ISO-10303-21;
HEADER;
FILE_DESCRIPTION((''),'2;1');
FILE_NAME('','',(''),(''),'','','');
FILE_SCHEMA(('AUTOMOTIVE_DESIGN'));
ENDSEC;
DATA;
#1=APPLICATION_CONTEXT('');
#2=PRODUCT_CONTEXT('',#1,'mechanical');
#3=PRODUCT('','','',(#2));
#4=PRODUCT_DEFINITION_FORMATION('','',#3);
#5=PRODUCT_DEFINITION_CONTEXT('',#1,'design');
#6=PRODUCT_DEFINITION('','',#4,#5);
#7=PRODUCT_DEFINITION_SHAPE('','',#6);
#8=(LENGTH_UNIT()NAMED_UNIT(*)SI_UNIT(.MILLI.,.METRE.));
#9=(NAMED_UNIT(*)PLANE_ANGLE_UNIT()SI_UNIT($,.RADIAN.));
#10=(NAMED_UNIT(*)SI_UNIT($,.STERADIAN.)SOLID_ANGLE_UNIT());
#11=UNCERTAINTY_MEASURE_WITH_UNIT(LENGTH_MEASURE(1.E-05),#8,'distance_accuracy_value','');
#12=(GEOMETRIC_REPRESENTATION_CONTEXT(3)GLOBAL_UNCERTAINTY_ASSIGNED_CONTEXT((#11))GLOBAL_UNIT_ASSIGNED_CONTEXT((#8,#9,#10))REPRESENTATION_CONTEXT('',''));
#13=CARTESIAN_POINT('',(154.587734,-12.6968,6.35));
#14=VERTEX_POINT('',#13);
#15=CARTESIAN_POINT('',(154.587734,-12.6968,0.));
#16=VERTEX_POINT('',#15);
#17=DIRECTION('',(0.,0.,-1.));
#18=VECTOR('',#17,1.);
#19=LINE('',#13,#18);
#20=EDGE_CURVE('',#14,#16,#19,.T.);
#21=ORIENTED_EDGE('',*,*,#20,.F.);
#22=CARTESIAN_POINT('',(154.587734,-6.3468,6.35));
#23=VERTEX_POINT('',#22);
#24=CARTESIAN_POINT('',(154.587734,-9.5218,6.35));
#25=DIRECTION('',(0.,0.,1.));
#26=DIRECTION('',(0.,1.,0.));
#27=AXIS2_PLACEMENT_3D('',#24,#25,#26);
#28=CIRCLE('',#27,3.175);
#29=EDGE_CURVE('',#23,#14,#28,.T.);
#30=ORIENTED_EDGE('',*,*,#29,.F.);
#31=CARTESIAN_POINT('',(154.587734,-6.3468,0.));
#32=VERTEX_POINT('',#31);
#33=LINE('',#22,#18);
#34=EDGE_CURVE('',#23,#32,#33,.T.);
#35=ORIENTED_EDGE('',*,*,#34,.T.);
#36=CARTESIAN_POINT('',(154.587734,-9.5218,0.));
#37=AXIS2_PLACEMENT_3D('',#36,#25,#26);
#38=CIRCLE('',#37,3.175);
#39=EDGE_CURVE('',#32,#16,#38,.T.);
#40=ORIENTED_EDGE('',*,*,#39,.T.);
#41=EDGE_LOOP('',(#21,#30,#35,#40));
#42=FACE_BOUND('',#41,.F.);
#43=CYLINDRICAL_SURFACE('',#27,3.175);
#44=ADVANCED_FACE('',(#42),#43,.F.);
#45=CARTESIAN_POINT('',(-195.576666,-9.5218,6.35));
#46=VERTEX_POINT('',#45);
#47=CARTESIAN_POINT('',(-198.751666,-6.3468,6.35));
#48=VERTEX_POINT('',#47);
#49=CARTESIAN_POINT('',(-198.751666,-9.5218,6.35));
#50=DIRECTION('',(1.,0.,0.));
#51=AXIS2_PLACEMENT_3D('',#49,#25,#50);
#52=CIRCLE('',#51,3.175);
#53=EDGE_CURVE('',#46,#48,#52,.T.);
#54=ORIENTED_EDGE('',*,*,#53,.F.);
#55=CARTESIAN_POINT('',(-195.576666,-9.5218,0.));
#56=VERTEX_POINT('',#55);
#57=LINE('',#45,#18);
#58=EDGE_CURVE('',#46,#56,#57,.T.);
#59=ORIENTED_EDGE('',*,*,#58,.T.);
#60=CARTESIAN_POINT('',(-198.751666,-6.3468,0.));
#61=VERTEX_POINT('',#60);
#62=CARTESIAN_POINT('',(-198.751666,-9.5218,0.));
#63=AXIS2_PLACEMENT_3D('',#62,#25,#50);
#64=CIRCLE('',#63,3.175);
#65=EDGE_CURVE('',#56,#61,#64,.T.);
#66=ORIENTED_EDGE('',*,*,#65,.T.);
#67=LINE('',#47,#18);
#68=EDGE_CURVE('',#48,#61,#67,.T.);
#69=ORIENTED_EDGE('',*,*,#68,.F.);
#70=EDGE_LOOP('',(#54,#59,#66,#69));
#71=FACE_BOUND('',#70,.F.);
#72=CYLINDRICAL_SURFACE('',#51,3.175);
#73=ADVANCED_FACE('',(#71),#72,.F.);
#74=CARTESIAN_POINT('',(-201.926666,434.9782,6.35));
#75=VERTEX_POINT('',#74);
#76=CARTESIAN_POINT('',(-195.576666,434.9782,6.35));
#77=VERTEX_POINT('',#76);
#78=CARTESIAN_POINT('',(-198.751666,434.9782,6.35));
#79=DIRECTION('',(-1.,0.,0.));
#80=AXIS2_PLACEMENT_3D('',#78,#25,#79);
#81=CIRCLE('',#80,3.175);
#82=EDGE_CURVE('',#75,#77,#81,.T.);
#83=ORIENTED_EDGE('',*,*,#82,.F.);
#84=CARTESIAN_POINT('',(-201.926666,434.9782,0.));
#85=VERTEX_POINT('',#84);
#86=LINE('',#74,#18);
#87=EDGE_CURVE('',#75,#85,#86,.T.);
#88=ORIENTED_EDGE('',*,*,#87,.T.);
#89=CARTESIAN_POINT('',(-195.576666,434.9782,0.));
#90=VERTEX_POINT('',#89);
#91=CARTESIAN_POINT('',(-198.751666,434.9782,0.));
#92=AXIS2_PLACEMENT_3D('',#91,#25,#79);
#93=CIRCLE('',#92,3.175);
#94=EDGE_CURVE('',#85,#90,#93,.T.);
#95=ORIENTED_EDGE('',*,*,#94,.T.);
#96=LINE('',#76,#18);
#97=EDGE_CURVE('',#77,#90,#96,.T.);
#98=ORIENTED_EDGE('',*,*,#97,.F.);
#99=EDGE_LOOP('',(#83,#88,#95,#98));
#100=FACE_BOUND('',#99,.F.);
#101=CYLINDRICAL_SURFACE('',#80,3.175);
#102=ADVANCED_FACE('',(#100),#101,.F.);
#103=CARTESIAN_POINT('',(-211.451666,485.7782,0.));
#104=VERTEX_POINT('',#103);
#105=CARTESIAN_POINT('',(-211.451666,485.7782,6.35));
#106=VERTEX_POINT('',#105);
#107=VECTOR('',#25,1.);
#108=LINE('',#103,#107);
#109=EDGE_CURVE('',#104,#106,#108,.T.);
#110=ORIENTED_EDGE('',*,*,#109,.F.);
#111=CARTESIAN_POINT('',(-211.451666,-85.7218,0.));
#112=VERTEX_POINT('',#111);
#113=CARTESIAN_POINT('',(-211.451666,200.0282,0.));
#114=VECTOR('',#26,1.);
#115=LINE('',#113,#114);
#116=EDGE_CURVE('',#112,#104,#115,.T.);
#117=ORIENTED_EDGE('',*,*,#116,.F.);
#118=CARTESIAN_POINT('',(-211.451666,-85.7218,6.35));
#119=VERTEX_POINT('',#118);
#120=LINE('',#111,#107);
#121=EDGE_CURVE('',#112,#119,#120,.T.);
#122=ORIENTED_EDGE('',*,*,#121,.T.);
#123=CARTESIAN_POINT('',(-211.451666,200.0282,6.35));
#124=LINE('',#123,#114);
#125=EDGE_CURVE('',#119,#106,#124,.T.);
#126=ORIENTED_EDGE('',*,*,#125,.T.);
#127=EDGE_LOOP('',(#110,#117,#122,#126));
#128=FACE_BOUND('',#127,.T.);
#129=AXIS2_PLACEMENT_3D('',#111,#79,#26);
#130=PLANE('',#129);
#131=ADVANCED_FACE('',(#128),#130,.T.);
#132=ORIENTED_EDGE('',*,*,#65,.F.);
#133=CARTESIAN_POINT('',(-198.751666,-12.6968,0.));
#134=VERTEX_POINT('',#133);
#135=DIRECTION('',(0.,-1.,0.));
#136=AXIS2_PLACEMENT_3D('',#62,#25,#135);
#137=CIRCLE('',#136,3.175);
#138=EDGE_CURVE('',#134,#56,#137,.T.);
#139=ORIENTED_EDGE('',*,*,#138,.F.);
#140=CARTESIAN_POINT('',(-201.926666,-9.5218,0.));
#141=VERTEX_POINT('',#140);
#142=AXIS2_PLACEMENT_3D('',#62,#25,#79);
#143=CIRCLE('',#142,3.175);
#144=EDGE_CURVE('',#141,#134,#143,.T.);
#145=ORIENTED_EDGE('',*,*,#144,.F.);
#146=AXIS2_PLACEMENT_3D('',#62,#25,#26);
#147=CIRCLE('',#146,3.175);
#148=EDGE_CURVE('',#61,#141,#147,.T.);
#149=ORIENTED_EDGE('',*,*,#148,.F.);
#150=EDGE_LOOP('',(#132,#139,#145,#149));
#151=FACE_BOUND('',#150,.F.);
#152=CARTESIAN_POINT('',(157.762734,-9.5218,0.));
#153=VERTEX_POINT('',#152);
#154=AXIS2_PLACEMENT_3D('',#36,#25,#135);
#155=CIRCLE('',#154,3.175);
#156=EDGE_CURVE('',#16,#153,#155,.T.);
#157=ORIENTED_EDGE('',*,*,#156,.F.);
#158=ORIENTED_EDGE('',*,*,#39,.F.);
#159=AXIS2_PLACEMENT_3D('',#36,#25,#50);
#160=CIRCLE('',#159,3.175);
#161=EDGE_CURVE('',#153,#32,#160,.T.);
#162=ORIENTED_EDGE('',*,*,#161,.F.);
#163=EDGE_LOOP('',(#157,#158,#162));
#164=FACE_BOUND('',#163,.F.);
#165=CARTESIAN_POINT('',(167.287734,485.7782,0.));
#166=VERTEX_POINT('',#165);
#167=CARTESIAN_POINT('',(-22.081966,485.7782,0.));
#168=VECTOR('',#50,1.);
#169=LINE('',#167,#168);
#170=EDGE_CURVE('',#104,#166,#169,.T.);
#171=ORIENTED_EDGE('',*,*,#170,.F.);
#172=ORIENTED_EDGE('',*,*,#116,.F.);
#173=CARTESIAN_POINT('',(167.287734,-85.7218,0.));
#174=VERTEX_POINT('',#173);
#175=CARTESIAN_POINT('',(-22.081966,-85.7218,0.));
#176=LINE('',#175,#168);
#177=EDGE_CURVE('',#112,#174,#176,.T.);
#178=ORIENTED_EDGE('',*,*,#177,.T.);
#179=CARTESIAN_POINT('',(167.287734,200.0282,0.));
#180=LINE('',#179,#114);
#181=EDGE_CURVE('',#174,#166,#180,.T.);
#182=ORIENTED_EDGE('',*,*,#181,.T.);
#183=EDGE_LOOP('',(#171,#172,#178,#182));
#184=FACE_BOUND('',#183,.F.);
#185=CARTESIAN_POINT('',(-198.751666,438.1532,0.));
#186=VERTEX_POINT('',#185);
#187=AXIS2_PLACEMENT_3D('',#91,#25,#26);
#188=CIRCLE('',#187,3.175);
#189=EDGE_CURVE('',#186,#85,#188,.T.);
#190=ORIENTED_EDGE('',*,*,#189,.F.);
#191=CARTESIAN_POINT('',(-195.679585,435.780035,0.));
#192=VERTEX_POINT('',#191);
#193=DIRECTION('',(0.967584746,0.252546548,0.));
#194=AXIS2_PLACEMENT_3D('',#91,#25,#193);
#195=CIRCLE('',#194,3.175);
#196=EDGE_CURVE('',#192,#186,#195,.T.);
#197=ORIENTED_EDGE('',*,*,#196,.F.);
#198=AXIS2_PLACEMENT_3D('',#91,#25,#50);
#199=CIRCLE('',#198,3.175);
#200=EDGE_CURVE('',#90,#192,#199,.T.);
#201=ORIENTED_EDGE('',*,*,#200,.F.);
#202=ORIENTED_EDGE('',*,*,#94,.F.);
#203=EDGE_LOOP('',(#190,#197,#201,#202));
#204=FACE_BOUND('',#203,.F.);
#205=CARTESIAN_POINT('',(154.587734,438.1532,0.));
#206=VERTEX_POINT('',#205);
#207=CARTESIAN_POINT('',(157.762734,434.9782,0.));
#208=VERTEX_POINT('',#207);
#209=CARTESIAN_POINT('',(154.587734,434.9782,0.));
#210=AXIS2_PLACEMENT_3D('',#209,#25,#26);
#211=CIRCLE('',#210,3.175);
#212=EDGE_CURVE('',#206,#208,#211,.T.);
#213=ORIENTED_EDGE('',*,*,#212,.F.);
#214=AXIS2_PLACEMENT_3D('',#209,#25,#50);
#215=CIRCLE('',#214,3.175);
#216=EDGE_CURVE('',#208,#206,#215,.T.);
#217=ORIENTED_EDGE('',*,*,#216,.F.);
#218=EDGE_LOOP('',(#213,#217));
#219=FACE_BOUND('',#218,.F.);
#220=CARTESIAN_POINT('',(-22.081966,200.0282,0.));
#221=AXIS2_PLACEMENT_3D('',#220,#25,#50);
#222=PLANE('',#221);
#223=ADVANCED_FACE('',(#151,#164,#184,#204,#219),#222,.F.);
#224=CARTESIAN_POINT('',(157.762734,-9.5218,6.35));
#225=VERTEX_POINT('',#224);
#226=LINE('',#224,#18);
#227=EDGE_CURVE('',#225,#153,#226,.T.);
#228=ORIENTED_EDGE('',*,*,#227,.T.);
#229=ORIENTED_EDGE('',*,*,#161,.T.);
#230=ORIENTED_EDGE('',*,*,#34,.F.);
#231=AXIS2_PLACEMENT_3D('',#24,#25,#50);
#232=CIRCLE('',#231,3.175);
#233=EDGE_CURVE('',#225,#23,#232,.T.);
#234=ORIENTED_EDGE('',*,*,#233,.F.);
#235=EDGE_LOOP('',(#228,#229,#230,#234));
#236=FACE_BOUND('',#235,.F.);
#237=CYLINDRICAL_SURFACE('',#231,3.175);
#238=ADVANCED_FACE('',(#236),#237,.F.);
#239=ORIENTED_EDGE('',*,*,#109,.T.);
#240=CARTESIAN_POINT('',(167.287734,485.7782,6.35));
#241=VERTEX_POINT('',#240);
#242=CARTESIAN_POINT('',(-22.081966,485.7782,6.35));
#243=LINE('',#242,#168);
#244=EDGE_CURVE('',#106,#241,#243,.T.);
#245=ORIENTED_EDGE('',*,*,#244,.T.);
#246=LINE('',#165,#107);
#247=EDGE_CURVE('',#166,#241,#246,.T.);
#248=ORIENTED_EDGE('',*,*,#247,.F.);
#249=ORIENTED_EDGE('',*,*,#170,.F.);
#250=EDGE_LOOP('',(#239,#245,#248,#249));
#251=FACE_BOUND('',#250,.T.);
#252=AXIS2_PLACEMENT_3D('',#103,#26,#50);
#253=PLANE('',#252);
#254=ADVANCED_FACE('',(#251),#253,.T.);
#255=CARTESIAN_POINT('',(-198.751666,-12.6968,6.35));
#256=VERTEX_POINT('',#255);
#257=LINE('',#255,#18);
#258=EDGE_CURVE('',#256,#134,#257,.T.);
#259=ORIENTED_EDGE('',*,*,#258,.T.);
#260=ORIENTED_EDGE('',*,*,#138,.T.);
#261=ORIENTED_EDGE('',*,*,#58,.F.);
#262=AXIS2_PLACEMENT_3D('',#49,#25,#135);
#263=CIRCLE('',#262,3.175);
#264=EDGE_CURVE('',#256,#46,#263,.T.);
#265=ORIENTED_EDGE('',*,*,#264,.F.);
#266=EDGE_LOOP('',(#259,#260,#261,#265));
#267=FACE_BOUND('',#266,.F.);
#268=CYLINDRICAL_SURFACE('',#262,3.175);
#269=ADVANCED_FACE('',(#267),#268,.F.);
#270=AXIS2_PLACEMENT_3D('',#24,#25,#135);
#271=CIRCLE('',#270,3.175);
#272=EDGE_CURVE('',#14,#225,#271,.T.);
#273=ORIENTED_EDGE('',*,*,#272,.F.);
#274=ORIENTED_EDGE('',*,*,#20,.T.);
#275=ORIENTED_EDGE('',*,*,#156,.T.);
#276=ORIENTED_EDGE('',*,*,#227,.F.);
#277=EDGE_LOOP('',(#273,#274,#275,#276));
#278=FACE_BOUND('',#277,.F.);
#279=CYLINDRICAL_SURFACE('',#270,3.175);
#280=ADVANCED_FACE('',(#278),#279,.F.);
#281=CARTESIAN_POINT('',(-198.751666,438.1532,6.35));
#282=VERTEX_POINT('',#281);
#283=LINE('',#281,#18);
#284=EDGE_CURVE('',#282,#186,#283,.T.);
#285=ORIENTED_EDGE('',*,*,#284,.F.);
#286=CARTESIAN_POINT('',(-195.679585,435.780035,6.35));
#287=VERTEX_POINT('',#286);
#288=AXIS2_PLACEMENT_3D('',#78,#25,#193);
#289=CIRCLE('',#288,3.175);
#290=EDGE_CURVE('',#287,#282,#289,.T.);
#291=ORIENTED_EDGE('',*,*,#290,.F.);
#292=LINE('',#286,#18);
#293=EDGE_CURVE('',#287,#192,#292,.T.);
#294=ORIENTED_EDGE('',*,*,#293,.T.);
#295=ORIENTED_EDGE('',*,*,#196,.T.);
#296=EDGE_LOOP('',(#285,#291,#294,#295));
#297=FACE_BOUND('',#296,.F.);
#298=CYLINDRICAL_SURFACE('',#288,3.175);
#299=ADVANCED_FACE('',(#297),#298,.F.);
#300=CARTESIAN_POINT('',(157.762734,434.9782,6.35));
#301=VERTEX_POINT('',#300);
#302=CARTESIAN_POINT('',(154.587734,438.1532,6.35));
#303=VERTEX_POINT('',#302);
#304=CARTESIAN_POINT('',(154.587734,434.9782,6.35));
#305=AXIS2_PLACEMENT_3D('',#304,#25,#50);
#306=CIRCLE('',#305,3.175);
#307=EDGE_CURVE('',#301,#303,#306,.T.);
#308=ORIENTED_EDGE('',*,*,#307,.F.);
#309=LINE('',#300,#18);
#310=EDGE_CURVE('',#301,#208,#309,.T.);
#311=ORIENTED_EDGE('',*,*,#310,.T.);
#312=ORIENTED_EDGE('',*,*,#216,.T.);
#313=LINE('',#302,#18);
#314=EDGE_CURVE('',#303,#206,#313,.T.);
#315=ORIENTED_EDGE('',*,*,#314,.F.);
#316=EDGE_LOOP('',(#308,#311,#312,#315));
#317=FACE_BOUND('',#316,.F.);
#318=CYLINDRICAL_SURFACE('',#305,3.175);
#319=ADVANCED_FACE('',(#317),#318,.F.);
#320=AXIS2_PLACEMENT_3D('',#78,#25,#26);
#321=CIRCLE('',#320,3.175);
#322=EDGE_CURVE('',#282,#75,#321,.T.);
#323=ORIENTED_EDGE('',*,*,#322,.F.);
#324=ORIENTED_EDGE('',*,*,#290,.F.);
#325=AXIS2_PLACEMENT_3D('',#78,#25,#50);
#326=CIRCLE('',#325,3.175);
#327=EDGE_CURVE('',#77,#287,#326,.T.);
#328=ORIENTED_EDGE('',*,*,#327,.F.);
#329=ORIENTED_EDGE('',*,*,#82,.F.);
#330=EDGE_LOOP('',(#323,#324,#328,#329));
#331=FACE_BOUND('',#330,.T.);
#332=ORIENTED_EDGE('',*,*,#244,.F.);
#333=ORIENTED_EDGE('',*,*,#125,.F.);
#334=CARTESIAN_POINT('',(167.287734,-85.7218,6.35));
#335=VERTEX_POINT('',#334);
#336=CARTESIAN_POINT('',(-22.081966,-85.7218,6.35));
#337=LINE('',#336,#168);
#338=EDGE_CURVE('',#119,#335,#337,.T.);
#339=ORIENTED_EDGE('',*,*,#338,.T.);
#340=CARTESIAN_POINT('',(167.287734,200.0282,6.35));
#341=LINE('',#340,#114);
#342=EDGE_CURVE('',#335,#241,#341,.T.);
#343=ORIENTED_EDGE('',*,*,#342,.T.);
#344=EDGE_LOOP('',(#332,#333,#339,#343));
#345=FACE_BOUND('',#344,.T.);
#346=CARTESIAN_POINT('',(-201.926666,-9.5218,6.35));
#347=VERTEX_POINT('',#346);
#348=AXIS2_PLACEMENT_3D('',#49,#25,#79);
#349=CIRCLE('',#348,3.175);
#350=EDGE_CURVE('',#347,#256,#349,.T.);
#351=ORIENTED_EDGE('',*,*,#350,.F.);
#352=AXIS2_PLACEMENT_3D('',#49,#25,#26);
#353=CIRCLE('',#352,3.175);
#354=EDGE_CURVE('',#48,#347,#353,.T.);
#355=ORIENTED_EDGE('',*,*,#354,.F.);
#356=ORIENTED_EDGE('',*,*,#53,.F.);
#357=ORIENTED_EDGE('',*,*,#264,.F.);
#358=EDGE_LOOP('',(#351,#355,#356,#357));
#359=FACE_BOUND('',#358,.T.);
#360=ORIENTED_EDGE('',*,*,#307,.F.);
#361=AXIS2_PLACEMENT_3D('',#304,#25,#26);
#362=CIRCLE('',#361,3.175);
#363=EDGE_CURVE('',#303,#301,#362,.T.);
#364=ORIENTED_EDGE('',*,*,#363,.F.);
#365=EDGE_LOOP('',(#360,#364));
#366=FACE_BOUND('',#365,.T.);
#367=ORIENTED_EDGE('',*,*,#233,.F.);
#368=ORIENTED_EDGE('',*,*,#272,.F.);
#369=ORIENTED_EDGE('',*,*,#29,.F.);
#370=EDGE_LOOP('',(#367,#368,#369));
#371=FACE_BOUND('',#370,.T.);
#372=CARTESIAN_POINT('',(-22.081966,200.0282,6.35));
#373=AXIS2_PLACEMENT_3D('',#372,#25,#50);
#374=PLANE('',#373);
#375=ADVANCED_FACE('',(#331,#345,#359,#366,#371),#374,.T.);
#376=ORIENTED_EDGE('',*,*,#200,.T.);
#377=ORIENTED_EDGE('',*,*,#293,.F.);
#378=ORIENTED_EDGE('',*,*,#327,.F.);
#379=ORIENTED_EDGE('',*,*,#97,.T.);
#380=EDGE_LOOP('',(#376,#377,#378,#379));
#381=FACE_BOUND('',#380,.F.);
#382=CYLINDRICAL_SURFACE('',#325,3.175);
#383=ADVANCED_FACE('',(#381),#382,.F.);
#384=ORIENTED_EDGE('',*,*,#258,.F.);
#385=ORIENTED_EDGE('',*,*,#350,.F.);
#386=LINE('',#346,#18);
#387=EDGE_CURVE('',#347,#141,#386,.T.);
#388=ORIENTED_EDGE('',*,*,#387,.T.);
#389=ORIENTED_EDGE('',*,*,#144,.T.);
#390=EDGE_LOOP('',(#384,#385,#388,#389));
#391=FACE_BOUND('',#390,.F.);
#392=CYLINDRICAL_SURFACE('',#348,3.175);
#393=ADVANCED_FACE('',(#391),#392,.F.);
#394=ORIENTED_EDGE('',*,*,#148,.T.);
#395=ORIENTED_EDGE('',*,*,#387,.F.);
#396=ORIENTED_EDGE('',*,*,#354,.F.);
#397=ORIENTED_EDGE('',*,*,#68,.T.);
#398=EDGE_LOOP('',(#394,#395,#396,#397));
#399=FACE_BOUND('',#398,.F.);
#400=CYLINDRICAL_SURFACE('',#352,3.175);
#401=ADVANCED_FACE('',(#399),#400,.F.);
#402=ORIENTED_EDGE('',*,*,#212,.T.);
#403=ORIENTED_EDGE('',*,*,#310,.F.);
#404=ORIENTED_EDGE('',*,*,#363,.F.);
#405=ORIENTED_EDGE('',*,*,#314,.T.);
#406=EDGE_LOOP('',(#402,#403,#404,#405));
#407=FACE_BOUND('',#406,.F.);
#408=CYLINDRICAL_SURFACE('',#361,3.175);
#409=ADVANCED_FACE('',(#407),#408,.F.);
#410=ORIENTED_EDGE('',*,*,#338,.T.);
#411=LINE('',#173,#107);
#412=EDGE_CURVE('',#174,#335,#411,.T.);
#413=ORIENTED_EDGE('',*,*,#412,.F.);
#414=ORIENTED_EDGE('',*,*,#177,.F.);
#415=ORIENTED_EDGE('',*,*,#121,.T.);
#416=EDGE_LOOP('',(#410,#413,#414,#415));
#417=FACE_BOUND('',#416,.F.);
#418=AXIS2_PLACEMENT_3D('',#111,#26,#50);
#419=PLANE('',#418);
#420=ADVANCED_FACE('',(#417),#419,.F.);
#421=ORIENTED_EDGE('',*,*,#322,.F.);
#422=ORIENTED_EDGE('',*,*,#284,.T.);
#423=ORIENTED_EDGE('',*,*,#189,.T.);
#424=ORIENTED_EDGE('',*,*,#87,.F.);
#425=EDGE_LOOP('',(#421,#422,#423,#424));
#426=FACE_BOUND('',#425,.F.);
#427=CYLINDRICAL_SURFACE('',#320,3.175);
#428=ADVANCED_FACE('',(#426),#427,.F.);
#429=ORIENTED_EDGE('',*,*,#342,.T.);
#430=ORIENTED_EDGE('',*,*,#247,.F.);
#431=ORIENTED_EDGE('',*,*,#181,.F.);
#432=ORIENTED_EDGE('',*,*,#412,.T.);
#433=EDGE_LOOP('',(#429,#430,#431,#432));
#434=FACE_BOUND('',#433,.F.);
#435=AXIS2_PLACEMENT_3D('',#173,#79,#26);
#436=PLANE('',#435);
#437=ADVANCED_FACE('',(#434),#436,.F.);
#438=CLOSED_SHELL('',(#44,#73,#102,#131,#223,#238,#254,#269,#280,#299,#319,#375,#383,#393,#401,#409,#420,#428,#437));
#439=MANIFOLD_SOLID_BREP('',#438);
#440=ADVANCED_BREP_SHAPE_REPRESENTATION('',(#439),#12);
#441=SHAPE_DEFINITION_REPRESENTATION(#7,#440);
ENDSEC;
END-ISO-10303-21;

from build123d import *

# Parameters (mm, degrees)
F0_W     = 378.7394
F0_H     = 571.5
F1_DEPTH = 6.35
F3_DEPTH = 6.351


# Not quite as in the source:
# - a length typed as a fraction of an inch, garbled in the dataset ("3 / 203.2 mm" for 3/8 in), is restored


with BuildPart() as f1:
    # F0 (on Top) → F1 (new body)
    with BuildSketch(Plane.XY):
        with Locations((-22.0819663584, 200.0282000497)):
            Rectangle(F0_W, F0_H)
    extrude(amount=F1_DEPTH)

    # F2 (on face) → F3 (cut, through all)
    with BuildSketch(Plane.XY.offset(6.35)):
        with BuildLine():
            ThreePointArc((-201.9266663584, 434.9782000497), (-198.7516663584, 431.8032000497), (-195.5766663584, 434.9782000497))
            ThreePointArc((-195.5766663584, 434.9782000497), (-195.6025010735, 435.3824066906), (-195.679584789, 435.7800353388))
            Line((-195.679584789, 435.7800353388), (-198.7516663584, 434.9782000497))
            Line((-198.7516663584, 434.9782000497), (-201.9266663584, 434.9782000497))
        make_face()
        with BuildLine():
            Line((-198.7516663584, 434.9782000497), (-195.679584789, 435.7800353388))
            ThreePointArc((-195.679584789, 435.7800353388), (-196.8106874872, 437.4908134345), (-198.7516663584, 438.1532000497))
            Line((-198.7516663584, 438.1532000497), (-198.7516663584, 434.9782000497))
        make_face()
        with BuildLine():
            ThreePointArc((-198.7516663584, 438.1532000497), (-200.9967303887, 437.22326408), (-201.9266663584, 434.9782000497))
            Line((-201.9266663584, 434.9782000497), (-198.7516663584, 434.9782000497))
            Line((-198.7516663584, 434.9782000497), (-198.7516663584, 438.1532000497))
        make_face()
        with BuildLine():
            Line((154.5877336416, 434.9782000497), (157.7627336416, 434.9782000497))
            ThreePointArc((157.7627336416, 434.9782000497), (156.8327976718, 437.22326408), (154.5877336416, 438.1532000497))
            Line((154.5877336416, 438.1532000497), (154.5877336416, 434.9782000497))
        make_face()
        with BuildLine():
            ThreePointArc((154.5877336416, 438.1532000497), (152.3426696113, 432.7331360195), (157.7627336416, 434.9782000497))
            Line((157.7627336416, 434.9782000497), (154.5877336416, 434.9782000497))
            Line((154.5877336416, 434.9782000497), (154.5877336416, 438.1532000497))
        make_face()
        with BuildLine():
            ThreePointArc((-198.7516663584, -12.6967999503), (-196.5066023282, -11.7668639805), (-195.5766663584, -9.5217999503))
            ThreePointArc((-195.5766663584, -9.5217999503), (-196.5066023282, -7.27673592), (-198.7516663584, -6.3467999503))
            Line((-198.7516663584, -6.3467999503), (-198.7516663584, -9.5217999503))
            Line((-198.7516663584, -9.5217999503), (-198.7516663584, -12.6967999503))
        make_face()
        with BuildLine():
            Line((-198.7516663584, -9.5217999503), (-198.7516663584, -6.3467999503))
            ThreePointArc((-198.7516663584, -6.3467999503), (-200.9967303887, -7.27673592), (-201.9266663584, -9.5217999503))
            Line((-201.9266663584, -9.5217999503), (-198.7516663584, -9.5217999503))
        make_face()
        with BuildLine():
            ThreePointArc((-201.9266663584, -9.5217999503), (-200.9967303887, -11.7668639805), (-198.7516663584, -12.6967999503))
            Line((-198.7516663584, -12.6967999503), (-198.7516663584, -9.5217999503))
            Line((-198.7516663584, -9.5217999503), (-201.9266663584, -9.5217999503))
        make_face()
        with BuildLine():
            Line((154.5877336416, -9.5217999503), (157.7627336416, -9.5217999503))
            ThreePointArc((157.7627336416, -9.5217999503), (156.8327976718, -7.27673592), (154.5877336416, -6.3467999503))
            Line((154.5877336416, -6.3467999503), (154.5877336416, -9.5217999503))
        make_face()
        with BuildLine():
            ThreePointArc((154.5877336416, -12.6967999503), (156.8327976718, -11.7668639805), (157.7627336416, -9.5217999503))
            Line((157.7627336416, -9.5217999503), (154.5877336416, -9.5217999503))
            Line((154.5877336416, -9.5217999503), (154.5877336416, -12.6967999503))
        make_face()
        with BuildLine():
            Line((154.5877336416, -9.5217999503), (154.5877336416, -6.3467999503))
            ThreePointArc((154.5877336416, -6.3467999503), (151.4127336416, -9.5217999503), (154.5877336416, -12.6967999503))
            Line((154.5877336416, -12.6967999503), (154.5877336416, -9.5217999503))
        make_face()
    extrude(amount=-F3_DEPTH, mode=Mode.SUBTRACT)


solid = f1.part
